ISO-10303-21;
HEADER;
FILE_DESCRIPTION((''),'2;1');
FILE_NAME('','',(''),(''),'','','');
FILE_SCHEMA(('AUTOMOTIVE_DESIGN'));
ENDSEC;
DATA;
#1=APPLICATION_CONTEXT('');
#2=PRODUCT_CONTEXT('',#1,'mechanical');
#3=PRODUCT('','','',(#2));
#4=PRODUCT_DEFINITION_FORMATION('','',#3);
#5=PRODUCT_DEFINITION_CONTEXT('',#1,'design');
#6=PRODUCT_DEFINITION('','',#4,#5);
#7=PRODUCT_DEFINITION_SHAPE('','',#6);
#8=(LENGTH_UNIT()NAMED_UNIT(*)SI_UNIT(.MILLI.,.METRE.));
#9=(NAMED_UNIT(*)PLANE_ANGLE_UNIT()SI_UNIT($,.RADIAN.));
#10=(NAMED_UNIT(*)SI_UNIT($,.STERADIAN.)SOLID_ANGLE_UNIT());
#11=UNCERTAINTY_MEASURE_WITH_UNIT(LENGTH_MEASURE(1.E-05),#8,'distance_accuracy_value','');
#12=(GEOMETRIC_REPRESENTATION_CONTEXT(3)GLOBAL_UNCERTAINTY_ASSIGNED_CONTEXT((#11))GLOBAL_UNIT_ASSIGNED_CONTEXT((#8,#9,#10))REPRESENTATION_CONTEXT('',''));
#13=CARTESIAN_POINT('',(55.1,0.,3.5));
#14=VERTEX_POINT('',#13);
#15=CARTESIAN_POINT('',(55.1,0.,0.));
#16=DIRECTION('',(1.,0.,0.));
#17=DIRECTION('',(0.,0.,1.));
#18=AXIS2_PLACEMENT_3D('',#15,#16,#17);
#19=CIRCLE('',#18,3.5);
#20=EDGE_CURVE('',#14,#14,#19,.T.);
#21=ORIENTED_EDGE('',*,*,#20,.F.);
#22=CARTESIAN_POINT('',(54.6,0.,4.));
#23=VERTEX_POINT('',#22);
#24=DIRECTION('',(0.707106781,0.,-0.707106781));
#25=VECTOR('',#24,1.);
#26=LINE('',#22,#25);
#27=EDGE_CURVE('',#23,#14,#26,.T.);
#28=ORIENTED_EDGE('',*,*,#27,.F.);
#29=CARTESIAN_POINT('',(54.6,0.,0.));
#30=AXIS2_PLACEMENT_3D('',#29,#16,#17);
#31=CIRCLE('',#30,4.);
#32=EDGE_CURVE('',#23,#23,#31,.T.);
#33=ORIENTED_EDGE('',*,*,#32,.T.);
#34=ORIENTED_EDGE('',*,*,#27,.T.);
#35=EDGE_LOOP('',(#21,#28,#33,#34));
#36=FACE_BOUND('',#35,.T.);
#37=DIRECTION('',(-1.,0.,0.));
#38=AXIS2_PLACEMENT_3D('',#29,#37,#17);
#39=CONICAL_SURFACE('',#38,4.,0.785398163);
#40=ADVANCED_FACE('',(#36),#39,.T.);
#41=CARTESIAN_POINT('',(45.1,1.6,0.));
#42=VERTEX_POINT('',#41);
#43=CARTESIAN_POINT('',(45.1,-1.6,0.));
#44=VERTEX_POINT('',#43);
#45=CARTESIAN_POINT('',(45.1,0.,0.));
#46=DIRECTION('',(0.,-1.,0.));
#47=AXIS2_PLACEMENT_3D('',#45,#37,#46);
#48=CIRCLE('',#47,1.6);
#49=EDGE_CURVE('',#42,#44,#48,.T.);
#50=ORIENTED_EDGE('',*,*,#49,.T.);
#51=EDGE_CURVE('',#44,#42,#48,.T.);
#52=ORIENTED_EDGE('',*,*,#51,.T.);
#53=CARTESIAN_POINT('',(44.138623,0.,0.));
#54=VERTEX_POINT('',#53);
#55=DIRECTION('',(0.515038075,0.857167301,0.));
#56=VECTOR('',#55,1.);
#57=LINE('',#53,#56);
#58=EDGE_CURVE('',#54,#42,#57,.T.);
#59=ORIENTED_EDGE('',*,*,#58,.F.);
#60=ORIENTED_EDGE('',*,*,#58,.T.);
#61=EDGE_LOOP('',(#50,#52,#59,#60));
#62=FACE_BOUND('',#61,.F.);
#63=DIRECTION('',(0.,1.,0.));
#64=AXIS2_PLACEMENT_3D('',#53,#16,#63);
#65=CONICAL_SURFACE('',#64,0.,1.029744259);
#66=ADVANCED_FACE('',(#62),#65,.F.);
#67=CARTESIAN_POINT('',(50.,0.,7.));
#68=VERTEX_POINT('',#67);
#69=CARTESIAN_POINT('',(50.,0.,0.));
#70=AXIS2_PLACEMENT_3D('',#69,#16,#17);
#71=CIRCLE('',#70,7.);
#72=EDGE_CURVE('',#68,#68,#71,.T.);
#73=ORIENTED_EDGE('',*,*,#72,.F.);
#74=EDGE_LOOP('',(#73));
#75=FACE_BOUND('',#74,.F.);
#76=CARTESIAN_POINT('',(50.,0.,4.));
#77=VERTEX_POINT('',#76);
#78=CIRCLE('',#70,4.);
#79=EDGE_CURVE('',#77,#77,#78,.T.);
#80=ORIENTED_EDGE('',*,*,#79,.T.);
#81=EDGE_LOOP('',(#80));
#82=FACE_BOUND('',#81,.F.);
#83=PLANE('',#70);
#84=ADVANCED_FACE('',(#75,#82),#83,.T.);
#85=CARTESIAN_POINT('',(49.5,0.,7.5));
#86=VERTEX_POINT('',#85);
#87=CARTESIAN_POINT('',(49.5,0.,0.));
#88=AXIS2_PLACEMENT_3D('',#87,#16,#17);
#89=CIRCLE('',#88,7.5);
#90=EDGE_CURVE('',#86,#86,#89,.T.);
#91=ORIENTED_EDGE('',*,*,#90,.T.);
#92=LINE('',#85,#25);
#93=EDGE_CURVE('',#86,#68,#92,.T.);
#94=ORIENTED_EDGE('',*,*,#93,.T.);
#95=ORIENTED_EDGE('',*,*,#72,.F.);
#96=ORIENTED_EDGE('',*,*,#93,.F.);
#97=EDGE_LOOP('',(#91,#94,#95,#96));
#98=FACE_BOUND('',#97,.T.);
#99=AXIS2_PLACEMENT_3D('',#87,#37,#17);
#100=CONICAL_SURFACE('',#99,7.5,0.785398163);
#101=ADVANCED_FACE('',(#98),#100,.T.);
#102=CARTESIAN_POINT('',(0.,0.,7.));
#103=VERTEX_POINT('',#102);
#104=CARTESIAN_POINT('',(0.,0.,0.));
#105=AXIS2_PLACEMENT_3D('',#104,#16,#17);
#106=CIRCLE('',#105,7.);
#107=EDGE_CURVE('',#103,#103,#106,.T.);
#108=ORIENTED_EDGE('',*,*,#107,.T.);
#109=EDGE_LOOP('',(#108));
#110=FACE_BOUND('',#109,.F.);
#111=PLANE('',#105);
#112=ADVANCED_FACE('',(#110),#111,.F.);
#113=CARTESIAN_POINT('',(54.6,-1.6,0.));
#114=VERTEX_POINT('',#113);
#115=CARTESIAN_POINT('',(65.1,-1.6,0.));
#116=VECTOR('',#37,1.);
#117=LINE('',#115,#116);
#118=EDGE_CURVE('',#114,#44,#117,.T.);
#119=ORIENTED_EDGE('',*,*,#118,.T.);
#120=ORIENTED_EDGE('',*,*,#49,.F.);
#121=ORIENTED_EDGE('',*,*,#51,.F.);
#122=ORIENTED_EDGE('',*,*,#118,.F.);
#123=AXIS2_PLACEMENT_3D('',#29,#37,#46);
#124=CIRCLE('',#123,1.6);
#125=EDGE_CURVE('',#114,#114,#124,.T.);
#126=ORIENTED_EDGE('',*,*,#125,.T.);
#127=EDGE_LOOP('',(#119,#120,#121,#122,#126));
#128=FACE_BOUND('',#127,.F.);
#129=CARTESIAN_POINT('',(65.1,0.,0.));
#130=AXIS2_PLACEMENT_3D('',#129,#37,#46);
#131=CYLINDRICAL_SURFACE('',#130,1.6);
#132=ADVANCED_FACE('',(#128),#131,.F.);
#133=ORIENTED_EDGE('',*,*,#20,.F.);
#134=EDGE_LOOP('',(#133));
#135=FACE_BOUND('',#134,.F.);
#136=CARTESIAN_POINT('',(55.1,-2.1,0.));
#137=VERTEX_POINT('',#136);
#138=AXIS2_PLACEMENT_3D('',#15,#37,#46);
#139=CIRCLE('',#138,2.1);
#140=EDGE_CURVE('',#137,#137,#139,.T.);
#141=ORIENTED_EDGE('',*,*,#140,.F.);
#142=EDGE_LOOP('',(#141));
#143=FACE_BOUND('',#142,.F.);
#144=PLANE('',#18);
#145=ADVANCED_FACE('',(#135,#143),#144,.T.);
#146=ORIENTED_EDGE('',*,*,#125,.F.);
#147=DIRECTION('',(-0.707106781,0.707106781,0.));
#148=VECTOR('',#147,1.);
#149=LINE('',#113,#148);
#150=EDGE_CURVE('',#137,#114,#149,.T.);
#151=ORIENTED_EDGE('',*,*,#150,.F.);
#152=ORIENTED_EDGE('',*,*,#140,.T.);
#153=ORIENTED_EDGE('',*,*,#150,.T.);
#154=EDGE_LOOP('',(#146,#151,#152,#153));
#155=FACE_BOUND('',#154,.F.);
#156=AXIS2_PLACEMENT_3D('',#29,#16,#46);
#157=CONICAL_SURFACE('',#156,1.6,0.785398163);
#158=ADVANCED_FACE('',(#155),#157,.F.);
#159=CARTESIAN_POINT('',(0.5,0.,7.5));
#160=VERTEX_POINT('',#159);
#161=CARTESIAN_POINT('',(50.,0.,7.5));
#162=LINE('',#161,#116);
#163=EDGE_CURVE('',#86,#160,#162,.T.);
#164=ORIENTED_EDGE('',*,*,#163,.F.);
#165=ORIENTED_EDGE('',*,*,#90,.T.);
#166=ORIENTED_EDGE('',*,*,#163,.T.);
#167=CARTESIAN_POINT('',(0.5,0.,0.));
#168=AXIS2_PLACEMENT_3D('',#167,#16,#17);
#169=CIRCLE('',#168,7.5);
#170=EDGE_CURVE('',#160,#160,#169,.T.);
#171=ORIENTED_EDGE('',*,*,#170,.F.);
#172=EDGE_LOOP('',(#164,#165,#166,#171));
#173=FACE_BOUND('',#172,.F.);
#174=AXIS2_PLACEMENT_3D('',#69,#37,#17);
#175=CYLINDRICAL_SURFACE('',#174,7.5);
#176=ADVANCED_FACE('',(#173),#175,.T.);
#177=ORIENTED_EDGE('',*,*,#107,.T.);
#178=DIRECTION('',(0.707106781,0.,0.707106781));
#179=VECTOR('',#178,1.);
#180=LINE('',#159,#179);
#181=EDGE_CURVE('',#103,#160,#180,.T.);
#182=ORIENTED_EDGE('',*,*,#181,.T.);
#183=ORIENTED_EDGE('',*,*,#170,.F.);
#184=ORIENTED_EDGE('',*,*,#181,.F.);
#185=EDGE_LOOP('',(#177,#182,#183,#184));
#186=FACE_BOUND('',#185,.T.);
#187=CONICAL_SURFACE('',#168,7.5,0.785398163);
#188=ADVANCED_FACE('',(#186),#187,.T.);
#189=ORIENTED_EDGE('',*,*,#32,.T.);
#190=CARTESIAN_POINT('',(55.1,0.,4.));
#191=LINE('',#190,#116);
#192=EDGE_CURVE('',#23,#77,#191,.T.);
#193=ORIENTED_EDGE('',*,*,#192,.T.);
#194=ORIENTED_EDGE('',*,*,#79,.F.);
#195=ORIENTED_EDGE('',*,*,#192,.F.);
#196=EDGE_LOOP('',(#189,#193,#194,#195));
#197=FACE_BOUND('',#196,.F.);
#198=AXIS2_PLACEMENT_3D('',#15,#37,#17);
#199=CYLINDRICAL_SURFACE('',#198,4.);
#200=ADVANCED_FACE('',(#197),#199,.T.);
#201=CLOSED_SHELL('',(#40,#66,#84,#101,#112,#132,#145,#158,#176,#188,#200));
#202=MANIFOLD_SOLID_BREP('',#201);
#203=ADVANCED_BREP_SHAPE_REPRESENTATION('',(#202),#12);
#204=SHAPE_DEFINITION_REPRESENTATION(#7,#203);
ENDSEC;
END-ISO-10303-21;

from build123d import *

# Parameters (mm, degrees)
F3_D     = 3.2
F3_DEPTH = 10
F3_TIP   = 0.9613769904
F4_SIZE  = 0.5


with BuildPart() as f1:
    # F0 (on Front) → F1 (revolve)
    with BuildSketch(Plane.XZ):
        Polygon((0, 7.5), (0, 0), (50, 0), (55.1, 0), (55.1, 4), (50, 4), (50, 7.5), align=None)
    revolve(axis=Axis((25, 0, 0), (1, 0, 0)))

    # F3
    with Locations(Plane.YZ.offset(55.1)):
        with Locations((0, 0)):
            Hole(F3_D / 2, depth=F3_DEPTH)
            with Locations((0, 0, -(F3_DEPTH + F3_TIP / 2))):  # 118° drill point
                Cone(0, F3_D / 2, F3_TIP, mode=Mode.SUBTRACT)

    # F4
    f4_edges = [f1.edges().sort_by_distance(p)[0] for p in [
        (50, 0, -7.5),
        (0, 0, -7.5),
        (25, 0, 7.5),
        (55.1, 0, -4),
        (55.1, -1.6, 0),
    ]]
    chamfer(f4_edges, length=F4_SIZE)


solid = f1.part
